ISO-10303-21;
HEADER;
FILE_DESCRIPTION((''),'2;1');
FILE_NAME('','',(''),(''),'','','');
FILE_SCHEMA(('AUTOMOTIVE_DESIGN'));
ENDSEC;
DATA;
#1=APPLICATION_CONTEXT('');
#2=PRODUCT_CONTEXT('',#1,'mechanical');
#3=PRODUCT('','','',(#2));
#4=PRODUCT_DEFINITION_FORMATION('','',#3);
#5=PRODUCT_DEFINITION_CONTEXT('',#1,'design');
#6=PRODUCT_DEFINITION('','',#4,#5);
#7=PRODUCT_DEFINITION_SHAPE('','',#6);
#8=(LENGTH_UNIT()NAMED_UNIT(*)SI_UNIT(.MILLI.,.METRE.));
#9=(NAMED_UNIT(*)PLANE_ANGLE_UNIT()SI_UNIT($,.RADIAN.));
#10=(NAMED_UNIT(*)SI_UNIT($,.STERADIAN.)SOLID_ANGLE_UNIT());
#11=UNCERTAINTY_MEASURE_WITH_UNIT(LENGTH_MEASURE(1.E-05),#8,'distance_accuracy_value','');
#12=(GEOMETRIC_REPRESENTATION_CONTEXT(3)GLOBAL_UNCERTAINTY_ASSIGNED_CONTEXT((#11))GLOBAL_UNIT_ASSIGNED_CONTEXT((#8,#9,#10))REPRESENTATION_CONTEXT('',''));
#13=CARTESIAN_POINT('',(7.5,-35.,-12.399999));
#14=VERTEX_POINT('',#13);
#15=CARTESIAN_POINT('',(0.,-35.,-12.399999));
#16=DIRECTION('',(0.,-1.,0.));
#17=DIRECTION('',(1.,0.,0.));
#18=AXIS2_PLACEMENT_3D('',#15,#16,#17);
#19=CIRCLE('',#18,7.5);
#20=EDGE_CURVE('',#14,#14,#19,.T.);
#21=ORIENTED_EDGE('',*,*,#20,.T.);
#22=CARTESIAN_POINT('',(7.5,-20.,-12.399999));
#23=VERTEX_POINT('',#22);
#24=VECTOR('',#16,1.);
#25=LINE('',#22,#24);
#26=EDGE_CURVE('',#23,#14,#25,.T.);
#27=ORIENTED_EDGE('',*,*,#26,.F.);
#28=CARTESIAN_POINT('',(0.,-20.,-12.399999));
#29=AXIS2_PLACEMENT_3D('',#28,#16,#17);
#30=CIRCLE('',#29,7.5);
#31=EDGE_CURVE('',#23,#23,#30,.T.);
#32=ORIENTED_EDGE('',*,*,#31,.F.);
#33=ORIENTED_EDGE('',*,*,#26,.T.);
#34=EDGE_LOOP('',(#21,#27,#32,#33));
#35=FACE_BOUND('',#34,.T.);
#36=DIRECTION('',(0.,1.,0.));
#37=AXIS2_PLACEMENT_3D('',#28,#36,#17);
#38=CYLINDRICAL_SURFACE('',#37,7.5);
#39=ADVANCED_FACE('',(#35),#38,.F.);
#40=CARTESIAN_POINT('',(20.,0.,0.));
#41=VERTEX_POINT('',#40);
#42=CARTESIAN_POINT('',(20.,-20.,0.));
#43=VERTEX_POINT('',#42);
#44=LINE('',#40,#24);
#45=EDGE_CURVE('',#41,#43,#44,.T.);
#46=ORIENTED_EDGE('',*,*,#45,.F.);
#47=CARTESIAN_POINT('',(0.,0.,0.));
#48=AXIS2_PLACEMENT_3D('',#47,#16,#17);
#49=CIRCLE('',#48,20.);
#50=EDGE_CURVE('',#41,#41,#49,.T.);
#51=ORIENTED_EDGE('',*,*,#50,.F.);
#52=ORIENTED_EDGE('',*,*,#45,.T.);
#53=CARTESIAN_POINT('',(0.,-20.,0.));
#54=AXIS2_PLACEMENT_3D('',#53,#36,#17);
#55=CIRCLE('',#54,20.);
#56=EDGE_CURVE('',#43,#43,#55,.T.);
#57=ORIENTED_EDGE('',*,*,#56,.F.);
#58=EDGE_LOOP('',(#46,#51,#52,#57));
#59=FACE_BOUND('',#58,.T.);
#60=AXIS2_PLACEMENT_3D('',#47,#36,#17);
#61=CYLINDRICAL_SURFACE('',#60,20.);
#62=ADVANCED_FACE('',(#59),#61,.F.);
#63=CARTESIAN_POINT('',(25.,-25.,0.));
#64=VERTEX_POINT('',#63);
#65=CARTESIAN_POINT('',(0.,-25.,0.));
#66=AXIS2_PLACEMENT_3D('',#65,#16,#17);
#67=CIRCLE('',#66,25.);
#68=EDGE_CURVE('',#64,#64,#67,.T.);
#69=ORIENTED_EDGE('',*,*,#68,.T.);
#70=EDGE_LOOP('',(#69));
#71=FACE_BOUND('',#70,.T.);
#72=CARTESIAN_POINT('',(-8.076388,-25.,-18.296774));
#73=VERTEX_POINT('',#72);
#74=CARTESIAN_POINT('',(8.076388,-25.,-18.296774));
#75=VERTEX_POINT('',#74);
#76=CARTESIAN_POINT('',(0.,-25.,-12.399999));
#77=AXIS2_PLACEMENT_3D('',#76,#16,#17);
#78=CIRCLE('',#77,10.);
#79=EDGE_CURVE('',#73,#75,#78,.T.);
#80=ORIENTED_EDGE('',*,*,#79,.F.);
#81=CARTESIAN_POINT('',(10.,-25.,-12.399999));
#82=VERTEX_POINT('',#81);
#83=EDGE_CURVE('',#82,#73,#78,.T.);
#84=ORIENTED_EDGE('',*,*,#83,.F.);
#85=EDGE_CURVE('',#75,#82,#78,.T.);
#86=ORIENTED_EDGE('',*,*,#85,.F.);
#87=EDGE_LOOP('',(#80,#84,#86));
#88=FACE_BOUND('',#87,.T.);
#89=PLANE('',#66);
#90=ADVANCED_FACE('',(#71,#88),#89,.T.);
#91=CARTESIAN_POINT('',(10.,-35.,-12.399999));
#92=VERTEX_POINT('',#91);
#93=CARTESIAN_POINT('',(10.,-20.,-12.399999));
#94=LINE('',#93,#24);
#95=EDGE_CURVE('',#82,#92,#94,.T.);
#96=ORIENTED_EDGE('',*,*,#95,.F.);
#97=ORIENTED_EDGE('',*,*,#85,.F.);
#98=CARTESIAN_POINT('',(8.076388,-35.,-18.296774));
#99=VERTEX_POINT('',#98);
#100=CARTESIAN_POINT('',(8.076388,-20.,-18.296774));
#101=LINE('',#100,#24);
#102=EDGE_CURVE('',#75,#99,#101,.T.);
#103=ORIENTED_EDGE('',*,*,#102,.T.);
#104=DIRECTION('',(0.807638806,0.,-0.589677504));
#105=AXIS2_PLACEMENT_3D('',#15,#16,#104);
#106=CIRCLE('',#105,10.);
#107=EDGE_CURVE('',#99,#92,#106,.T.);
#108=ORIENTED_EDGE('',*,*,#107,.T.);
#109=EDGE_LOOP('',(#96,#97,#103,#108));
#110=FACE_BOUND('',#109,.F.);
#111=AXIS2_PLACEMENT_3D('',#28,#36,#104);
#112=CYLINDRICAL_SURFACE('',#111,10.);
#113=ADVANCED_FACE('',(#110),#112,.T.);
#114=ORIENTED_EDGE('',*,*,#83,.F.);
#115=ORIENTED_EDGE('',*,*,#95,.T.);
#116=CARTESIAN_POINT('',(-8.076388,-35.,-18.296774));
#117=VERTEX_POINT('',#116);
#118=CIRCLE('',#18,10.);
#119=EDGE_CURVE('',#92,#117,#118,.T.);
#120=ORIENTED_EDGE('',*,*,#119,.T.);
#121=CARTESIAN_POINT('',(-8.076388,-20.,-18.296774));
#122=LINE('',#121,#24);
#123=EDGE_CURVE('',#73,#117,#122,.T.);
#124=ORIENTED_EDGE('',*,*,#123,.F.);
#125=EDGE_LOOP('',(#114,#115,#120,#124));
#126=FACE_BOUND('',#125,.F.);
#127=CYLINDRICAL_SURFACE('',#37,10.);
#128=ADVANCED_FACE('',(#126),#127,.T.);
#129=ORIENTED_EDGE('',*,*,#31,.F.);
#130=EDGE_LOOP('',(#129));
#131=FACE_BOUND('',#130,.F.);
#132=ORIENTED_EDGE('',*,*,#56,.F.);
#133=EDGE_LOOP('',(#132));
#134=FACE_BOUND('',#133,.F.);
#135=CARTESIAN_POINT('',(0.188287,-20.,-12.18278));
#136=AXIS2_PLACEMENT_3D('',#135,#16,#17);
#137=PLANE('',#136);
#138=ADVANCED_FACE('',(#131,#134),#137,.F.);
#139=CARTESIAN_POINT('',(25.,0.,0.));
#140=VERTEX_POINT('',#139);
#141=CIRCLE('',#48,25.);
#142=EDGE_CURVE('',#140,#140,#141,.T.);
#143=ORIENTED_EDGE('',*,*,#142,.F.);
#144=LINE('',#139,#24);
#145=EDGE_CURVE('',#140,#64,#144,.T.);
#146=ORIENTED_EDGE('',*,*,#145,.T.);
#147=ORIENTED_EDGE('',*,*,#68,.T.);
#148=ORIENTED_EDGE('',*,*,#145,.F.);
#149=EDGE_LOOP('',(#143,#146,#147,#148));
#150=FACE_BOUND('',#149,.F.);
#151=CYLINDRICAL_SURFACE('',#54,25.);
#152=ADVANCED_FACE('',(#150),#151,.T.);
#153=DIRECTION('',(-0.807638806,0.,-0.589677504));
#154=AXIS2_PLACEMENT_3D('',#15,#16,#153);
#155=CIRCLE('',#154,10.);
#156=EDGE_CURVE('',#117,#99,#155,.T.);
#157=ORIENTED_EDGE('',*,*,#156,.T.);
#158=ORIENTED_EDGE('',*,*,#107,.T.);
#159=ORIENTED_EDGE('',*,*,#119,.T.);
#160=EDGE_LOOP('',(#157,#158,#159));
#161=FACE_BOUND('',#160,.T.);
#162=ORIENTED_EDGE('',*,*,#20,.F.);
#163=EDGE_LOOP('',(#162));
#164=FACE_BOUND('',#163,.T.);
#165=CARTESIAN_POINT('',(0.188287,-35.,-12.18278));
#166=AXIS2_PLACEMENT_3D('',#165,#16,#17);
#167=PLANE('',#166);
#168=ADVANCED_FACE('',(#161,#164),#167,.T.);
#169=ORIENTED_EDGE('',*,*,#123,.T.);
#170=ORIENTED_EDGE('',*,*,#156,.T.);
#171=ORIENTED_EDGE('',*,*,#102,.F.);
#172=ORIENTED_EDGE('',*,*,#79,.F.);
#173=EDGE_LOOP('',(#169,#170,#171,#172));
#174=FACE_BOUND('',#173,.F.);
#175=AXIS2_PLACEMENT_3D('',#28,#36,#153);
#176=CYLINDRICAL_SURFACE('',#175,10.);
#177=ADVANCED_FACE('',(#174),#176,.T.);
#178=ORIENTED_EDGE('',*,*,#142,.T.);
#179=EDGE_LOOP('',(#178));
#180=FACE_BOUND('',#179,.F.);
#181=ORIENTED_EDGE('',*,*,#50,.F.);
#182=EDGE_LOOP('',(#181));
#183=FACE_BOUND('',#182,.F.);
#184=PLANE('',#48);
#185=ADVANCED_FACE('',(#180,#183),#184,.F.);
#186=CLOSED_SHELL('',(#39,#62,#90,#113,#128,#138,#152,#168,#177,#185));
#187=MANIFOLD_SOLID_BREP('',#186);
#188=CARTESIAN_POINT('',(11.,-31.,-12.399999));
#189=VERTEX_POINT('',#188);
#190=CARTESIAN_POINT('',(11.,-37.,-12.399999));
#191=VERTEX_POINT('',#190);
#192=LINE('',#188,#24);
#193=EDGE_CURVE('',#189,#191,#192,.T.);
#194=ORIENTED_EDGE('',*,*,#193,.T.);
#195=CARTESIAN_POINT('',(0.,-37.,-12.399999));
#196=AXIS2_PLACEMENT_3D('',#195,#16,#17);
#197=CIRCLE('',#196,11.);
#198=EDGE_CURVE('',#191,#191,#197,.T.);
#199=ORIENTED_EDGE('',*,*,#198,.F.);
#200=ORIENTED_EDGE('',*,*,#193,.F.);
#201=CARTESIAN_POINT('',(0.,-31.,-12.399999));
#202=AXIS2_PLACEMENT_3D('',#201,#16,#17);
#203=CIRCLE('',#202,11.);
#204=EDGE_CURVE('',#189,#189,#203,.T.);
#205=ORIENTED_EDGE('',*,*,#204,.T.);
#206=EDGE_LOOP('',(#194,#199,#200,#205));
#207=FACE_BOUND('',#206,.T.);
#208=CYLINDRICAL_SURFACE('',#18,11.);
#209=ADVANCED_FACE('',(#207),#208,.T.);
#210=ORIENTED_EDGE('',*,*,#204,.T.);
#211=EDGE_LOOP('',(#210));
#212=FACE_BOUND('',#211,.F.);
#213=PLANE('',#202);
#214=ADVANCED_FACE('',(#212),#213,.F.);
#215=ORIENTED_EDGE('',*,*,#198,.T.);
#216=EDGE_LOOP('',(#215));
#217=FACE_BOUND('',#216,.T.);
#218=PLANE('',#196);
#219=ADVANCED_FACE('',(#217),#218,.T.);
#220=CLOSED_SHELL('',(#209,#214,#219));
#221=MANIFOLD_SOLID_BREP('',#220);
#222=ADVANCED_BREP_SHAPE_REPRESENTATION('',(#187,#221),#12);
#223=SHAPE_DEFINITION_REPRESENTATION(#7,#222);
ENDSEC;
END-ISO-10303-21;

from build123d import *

# Parameters (mm, degrees)
F0_R     = 25
F0_R_2   = 20
F1_DEPTH = 20
F2_R     = 25
F2_R_2   = 10
F3_DEPTH = 5
F2_R_3   = 7.5
F4_DEPTH = 15
F5_R     = 11
F5_R_2   = 10
F5_R_3   = 7.5
F6_DEPTH = 2
F7_DEPTH = 4


with BuildPart() as f1:
    # F0 (on Front) → F1 (new body)
    with BuildSketch(Plane.XZ):
        Circle(F0_R)
        Circle(F0_R_2, mode=Mode.SUBTRACT)
    extrude(amount=F1_DEPTH)

    # F2 (on face) → F3 (join)
    with BuildSketch(Plane.XZ.offset(20)):
        Circle(F2_R)
        with Locations((0, -12.3999994248)):
            Circle(F2_R_2, mode=Mode.SUBTRACT)
    extrude(amount=F3_DEPTH)

    # F2 (on face) → F4 (join)
    with BuildSketch(Plane.XZ.offset(20)):
        with BuildLine():
            ThreePointArc((8.0763880603, -18.2967744671), (9.5069416902, -15.5012991037), (10, -12.3999994248))
            ThreePointArc((10, -12.3999994248), (-3.1012996789, -2.8930577346), (-8.0763880603, -18.2967744671))
            ThreePointArc((-8.0763880603, -18.2967744671), (0, -20), (8.0763880603, -18.2967744671))
        make_face()
        with Locations((0, -12.3999994248)):
            Circle(F2_R_3, mode=Mode.SUBTRACT)
        with BuildLine():
            ThreePointArc((8.0763880603, -18.2967744671), (0, -20), (-8.0763880603, -18.2967744671))
            ThreePointArc((-8.0763880603, -18.2967744671), (0, -22.3999994248), (8.0763880603, -18.2967744671))
        make_face()
    extrude(amount=F4_DEPTH)


with BuildPart() as f6:
    # F5 (on face) → F6 (new body)
    with BuildSketch(Plane.XZ.offset(35)):
        with Locations((0, -12.3999994248)):
            Circle(F5_R)
        with Locations((0, -12.3999994248)):
            Circle(F5_R_2, mode=Mode.SUBTRACT)
        with Locations((0, -12.3999994248)):
            Circle(F5_R_2)
        with Locations((0, -12.3999994248)):
            Circle(F5_R_3, mode=Mode.SUBTRACT)
        with Locations((0, -12.3999994248)):
            Circle(F5_R_3)
    extrude(amount=F6_DEPTH)

    # F7 (add): a face of the model
    f7_faces = [f6.faces().sort_by_distance(p)[0] for p in [
        (0, -35, -12.3999994248),
    ]]
    extrude(f7_faces, amount=F7_DEPTH)


solid = Compound([f1.part, f6.part])
